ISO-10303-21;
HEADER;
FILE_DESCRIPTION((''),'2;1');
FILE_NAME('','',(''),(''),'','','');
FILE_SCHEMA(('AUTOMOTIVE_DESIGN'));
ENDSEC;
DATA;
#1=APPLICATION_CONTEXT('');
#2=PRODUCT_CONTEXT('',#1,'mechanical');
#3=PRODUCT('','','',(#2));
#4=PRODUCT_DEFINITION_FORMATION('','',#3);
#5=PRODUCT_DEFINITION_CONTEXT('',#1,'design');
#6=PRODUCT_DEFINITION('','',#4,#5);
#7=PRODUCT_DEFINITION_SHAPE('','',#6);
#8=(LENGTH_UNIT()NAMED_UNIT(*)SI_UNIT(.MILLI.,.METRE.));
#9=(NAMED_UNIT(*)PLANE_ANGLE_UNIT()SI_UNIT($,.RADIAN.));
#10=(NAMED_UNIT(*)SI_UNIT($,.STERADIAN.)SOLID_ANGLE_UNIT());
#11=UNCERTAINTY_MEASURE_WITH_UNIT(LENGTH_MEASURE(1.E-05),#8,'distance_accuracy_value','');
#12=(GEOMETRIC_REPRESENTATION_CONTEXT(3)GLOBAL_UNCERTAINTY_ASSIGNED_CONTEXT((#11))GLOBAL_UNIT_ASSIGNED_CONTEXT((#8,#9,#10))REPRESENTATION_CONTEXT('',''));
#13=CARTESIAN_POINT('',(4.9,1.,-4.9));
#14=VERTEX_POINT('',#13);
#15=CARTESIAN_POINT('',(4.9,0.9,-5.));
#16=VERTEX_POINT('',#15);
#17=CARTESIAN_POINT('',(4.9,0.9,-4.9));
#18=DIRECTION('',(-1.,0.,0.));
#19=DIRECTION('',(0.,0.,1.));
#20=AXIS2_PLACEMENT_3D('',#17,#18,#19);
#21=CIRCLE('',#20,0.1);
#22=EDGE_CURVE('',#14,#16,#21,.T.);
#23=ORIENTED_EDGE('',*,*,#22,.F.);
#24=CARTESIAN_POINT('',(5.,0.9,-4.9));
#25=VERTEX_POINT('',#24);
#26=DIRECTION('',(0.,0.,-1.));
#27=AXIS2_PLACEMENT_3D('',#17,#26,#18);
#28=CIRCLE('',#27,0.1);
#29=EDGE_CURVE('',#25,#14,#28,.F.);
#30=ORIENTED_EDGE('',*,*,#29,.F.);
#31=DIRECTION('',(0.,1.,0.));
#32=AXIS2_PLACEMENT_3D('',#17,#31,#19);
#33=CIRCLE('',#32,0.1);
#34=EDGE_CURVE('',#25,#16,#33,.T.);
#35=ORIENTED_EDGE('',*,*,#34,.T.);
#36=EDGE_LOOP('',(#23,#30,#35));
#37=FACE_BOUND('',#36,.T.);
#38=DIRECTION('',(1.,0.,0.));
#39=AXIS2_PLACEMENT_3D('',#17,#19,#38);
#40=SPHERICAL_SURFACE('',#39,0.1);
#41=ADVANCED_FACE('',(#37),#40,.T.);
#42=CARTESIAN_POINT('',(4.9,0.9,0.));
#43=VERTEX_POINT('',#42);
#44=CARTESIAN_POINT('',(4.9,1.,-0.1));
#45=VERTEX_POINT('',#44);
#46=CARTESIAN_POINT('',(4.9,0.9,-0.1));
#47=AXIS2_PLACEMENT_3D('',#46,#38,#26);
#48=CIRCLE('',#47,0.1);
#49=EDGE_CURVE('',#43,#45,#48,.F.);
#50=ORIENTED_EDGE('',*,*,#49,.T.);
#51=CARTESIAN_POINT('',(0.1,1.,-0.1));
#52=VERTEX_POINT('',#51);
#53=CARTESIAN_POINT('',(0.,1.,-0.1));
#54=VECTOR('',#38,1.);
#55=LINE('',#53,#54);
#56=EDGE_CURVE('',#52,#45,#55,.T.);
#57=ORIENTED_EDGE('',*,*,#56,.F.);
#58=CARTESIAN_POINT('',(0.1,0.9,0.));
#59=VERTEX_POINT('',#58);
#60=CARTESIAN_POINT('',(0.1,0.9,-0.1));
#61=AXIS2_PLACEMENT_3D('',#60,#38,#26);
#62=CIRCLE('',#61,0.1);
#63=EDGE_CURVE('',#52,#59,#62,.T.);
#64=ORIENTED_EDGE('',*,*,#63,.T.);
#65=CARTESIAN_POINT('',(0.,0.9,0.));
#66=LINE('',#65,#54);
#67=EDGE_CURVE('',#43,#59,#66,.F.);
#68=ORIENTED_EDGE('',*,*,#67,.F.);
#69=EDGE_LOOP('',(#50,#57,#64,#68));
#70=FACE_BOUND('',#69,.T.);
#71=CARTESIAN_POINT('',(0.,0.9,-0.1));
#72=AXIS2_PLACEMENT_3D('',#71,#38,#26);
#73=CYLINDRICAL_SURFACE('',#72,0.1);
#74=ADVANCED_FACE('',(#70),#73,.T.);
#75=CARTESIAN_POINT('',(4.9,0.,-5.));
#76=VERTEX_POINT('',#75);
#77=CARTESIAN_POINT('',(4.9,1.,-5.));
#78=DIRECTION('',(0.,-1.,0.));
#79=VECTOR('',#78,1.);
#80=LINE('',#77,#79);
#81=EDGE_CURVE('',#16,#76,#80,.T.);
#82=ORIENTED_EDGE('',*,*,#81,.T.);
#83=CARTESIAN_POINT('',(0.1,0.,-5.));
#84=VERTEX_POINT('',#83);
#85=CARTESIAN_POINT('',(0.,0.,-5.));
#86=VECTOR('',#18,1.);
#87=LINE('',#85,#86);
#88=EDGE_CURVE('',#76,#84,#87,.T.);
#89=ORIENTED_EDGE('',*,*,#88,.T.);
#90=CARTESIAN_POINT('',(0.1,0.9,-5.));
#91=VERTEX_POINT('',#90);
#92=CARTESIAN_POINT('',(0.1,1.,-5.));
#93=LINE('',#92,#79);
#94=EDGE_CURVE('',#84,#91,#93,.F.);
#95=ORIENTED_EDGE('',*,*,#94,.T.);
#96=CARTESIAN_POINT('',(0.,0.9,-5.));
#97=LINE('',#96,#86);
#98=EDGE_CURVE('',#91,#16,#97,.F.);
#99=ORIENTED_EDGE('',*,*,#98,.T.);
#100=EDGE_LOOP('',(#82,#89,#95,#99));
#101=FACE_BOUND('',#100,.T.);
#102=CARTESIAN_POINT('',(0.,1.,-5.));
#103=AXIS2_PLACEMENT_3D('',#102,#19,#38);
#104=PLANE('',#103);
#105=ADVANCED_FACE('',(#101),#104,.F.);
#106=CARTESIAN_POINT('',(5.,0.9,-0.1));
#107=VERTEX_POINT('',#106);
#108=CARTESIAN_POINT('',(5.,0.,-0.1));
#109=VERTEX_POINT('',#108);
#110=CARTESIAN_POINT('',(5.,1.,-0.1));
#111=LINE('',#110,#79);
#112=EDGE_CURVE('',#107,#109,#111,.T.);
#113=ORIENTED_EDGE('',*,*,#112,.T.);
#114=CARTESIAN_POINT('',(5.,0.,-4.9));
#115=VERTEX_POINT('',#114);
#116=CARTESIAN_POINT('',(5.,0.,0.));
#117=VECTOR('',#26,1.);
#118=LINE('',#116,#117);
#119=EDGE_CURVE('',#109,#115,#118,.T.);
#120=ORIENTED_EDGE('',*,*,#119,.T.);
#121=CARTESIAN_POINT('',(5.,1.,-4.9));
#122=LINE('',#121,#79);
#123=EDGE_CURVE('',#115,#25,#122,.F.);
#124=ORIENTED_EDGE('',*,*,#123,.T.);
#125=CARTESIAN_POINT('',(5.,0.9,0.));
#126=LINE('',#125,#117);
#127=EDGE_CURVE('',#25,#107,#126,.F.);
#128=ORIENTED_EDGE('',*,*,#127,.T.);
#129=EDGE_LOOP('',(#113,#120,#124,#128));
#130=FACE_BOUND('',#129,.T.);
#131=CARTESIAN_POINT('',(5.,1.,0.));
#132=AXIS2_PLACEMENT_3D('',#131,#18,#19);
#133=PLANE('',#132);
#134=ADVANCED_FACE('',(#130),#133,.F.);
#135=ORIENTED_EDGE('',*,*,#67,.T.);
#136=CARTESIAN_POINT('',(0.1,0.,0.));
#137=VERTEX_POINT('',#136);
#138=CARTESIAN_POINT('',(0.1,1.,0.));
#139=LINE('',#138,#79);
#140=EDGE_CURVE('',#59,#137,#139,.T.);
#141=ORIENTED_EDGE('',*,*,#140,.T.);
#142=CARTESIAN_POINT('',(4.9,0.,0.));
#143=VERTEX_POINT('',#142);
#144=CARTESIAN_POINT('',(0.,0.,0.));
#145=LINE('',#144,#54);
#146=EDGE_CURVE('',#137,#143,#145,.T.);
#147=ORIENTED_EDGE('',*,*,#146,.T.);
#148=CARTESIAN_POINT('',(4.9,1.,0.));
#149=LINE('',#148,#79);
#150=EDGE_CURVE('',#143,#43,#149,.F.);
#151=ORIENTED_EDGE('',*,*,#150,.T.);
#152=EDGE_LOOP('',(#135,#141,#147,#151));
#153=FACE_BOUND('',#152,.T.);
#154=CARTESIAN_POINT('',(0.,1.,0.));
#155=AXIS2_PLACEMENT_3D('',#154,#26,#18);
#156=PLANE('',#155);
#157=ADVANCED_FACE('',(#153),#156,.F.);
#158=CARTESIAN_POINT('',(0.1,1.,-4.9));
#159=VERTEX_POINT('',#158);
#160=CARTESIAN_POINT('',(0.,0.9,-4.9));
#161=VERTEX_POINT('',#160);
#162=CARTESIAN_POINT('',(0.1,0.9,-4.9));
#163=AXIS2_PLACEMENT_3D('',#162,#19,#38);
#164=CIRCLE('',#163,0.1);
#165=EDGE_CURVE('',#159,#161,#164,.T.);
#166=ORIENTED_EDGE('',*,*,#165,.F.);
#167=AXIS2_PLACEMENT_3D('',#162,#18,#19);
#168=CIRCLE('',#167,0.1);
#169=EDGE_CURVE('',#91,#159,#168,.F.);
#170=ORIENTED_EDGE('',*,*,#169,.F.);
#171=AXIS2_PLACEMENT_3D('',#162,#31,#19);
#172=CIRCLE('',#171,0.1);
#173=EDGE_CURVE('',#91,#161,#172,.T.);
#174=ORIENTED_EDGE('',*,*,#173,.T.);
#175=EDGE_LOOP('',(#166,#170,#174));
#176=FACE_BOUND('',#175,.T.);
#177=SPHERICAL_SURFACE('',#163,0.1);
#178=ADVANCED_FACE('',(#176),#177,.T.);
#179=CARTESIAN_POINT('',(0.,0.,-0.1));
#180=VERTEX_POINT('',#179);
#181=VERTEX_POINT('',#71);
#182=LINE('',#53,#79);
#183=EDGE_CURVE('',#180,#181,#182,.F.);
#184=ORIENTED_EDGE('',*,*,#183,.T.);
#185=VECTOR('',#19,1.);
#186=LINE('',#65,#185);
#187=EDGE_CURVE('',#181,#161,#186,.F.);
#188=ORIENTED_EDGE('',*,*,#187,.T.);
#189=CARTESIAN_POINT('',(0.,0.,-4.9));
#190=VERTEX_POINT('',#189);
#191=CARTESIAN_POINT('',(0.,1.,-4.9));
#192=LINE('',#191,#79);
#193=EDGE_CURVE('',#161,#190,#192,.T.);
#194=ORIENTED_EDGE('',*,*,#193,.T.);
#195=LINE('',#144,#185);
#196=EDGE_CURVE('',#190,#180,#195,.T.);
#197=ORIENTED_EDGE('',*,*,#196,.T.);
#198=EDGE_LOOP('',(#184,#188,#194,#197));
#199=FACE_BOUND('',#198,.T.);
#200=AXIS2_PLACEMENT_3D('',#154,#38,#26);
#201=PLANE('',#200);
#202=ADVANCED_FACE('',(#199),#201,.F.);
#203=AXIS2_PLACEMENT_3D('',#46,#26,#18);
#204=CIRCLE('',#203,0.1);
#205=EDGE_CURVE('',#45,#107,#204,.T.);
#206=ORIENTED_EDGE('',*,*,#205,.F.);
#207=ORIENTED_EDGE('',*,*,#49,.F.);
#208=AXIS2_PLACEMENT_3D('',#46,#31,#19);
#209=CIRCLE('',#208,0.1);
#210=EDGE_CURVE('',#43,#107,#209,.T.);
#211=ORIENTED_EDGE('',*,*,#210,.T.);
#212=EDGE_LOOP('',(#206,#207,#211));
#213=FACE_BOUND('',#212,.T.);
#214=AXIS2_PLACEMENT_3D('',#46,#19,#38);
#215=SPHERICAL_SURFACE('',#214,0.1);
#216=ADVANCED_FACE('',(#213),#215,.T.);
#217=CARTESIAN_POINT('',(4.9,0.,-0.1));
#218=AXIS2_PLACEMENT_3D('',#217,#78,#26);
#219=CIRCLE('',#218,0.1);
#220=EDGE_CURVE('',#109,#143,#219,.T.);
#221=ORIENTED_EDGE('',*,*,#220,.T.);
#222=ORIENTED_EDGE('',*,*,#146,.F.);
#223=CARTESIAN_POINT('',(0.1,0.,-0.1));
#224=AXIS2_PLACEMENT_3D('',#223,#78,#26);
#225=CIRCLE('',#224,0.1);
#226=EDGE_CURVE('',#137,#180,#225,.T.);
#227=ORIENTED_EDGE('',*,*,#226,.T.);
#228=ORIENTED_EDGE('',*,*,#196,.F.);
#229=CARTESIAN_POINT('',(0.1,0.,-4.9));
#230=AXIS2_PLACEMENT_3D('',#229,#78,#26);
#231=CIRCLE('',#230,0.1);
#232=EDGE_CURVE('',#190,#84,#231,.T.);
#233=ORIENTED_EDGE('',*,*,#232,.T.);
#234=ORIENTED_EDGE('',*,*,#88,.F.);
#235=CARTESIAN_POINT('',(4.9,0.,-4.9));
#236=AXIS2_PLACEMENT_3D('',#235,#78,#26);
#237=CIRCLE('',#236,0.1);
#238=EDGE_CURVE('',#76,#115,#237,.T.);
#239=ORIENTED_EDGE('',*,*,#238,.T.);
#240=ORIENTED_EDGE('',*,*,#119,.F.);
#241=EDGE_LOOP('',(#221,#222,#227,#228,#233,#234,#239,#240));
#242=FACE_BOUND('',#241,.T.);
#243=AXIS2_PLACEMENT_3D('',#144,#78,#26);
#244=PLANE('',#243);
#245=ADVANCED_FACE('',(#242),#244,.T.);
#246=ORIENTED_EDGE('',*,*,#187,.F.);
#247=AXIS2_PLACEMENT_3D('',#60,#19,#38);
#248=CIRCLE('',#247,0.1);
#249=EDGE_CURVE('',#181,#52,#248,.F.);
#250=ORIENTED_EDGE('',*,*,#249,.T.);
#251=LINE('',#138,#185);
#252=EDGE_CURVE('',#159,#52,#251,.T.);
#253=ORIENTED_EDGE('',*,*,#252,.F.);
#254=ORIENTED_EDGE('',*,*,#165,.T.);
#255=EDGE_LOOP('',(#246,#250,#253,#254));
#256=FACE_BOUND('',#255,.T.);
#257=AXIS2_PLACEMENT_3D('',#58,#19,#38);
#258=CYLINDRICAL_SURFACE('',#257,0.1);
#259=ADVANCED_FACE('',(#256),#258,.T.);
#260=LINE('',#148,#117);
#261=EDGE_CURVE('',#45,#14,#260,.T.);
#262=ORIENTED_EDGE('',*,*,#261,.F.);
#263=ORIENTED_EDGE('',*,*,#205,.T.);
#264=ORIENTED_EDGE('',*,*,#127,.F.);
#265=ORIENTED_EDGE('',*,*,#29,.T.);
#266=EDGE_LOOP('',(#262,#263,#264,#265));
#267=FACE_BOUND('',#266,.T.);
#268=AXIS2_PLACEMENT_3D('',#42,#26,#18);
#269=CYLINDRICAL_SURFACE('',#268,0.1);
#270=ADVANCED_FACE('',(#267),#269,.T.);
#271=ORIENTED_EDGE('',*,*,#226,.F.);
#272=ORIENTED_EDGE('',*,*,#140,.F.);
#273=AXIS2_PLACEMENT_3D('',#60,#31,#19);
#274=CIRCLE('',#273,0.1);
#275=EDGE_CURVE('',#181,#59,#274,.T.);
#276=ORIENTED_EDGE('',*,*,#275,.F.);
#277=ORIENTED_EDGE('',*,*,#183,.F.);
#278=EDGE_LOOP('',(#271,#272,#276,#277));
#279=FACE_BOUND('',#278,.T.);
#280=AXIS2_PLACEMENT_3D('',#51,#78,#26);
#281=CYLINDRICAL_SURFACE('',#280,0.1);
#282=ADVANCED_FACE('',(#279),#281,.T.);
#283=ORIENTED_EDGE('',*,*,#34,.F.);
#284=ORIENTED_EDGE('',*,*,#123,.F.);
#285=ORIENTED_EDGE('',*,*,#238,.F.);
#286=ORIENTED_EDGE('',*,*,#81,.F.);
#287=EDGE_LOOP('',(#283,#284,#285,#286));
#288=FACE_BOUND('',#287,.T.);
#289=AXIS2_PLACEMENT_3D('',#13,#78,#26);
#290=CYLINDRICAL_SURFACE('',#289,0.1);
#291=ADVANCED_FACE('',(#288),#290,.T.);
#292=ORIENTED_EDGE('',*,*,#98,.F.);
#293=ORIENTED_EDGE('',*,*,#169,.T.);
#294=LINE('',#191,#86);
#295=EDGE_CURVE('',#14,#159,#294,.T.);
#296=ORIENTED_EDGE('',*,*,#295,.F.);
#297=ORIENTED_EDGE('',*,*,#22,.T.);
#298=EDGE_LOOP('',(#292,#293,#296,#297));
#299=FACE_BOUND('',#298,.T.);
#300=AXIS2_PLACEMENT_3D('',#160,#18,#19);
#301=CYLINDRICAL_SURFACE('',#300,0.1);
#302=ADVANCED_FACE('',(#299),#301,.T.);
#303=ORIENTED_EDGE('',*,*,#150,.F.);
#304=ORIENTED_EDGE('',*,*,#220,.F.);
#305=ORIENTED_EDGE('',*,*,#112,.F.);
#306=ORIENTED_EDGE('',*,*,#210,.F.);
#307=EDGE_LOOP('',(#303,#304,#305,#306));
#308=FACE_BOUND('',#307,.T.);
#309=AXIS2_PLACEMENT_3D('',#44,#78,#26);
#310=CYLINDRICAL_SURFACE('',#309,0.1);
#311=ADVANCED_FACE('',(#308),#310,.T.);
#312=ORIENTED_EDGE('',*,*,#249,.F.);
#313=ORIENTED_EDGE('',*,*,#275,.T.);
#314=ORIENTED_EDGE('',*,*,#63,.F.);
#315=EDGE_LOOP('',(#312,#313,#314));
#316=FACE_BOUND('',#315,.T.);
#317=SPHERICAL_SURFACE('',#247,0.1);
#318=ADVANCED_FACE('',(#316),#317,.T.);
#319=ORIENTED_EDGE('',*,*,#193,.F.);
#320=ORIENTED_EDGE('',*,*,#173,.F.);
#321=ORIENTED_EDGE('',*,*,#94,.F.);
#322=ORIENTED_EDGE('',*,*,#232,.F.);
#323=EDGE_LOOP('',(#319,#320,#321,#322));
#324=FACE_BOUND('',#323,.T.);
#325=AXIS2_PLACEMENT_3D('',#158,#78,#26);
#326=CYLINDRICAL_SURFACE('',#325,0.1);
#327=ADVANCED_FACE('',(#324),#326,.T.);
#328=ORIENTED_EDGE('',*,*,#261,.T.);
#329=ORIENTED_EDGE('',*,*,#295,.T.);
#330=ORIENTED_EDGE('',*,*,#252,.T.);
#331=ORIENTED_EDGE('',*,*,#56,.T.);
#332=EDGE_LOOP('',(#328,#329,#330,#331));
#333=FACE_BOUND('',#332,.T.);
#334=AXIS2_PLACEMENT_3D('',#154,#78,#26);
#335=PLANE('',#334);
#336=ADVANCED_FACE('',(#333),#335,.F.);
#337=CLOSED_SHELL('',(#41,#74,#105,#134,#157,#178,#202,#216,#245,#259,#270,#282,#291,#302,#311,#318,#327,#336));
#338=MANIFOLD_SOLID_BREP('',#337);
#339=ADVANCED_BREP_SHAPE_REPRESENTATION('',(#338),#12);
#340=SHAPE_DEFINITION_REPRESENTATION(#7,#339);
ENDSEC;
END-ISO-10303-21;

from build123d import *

# Parameters (mm, degrees)
SKETCH1_W           = 5
SKETCH1_H           = 5
BOSS_EXTRUDE1_DEPTH = 1
FILLET1_R           = 0.1
FILLET2_R           = 0.1


with BuildPart() as part:
    # Sketch1 → Boss-Extrude1 (new body)
    with BuildSketch(Plane(origin=(0, 0, 0), x_dir=(1, 0, 0), z_dir=(0, 1, 0))):
        with Locations((2.5, 2.5)):
            Rectangle(SKETCH1_W, SKETCH1_H)
    extrude(amount=BOSS_EXTRUDE1_DEPTH)

    # Fillet1
    fillet1_edges = [part.edges().sort_by_distance(p)[0] for p in [
        (5, 1, -2.5),
        (2.5, 1, -5),
        (0, 1, -2.5),
        (2.5, 1, 0),
    ]]
    fillet(fillet1_edges, radius=FILLET1_R)

    # Fillet2
    # the kernel refuses this fillet: 0.1 mm, written as the material it takes off along each edge
    with BuildSketch(Plane(origin=(4.9, 0.9, -4.9), x_dir=(0, 0, -1), z_dir=(1, 0, 0))) as fillet2_piece_1_section:
        Polygon((0, 0), (FILLET2_R, 0), (FILLET2_R, FILLET2_R), (0, FILLET2_R), align=None)
    fillet2_piece_1 = extrude(amount=FILLET2_R, mode=Mode.PRIVATE)
    fillet2_piece_1 = fillet2_piece_1 - Plane(origin=(4.9, 0.9, -4.9), x_dir=(0, -0.7071067811865475, 0.7071067811865475), z_dir=(1, 0, 0)) * Sphere(FILLET2_R, mode=Mode.PRIVATE)
    add(fillet2_piece_1, mode=Mode.SUBTRACT)
    with BuildSketch(Plane(origin=(4.9, 0.9, -0.1), x_dir=(1, 0, 0), z_dir=(0, 0, 1))) as fillet2_piece_2_section:
        Polygon((0, 0), (FILLET2_R, 0), (FILLET2_R, FILLET2_R), (0, FILLET2_R), align=None)
    fillet2_piece_2 = extrude(amount=FILLET2_R, mode=Mode.PRIVATE)
    fillet2_piece_2 = fillet2_piece_2 - Plane(origin=(4.9, 0.9, -0.1), x_dir=(-0.7071067811865475, -0.7071067811865475, 0), z_dir=(0, 0, 1)) * Sphere(FILLET2_R, mode=Mode.PRIVATE)
    add(fillet2_piece_2, mode=Mode.SUBTRACT)
    with BuildSketch(Plane(origin=(0.1, 0.9, -4.9), x_dir=(0, 0, -1), z_dir=(-1, 0, 0))) as fillet2_piece_3_section:
        Polygon((0, 0), (FILLET2_R, 0), (FILLET2_R, -FILLET2_R), (0, -FILLET2_R), align=None)
    fillet2_piece_3 = extrude(amount=FILLET2_R, mode=Mode.PRIVATE)
    fillet2_piece_3 = fillet2_piece_3 - Plane(origin=(0.1, 0.9, -4.9), x_dir=(0, -0.7071067811865475, 0.7071067811865475), z_dir=(-1, 0, 0)) * Sphere(FILLET2_R, mode=Mode.PRIVATE)
    add(fillet2_piece_3, mode=Mode.SUBTRACT)
    with BuildSketch(Plane(origin=(0.1, 0.9, -0.1), x_dir=(-1, 0, 0), z_dir=(0, 0, 1))) as fillet2_piece_4_section:
        Polygon((0, 0), (FILLET2_R, 0), (FILLET2_R, -FILLET2_R), (0, -FILLET2_R), align=None)
    fillet2_piece_4 = extrude(amount=FILLET2_R, mode=Mode.PRIVATE)
    fillet2_piece_4 = fillet2_piece_4 - Plane(origin=(0.1, 0.9, -0.1), x_dir=(0.7071067811865475, -0.7071067811865475, 0), z_dir=(0, 0, 1)) * Sphere(FILLET2_R, mode=Mode.PRIVATE)
    add(fillet2_piece_4, mode=Mode.SUBTRACT)
    with BuildSketch(Plane(origin=(0, -0.25, 0), x_dir=(1, 0, 0), z_dir=(0, 1, 0)), Plane(origin=(0, -0.25, -5), x_dir=(0, 0, 1), z_dir=(0, 1, 0))) as fillet2_piece_5:
        with BuildLine():
            CenterArc((FILLET2_R, FILLET2_R), FILLET2_R, 180, 90)
            Line((0, FILLET2_R), (0, 0))
            Line((0, 0), (FILLET2_R, 0))
        make_face()
    extrude(amount=1.15, mode=Mode.SUBTRACT)
    with BuildSketch(Plane(origin=(5, -0.25, 0), x_dir=(-1, 0, 0), z_dir=(0, 1, 0)), Plane(origin=(5, -0.25, -5), x_dir=(0, 0, 1), z_dir=(0, 1, 0))) as fillet2_piece_6:
        with BuildLine():
            CenterArc((FILLET2_R, -FILLET2_R), FILLET2_R, 90, 90)
            Line((0, -FILLET2_R), (0, 0))
            Line((0, 0), (FILLET2_R, 0))
        make_face()
    extrude(amount=1.15, mode=Mode.SUBTRACT)


solid = part.part
